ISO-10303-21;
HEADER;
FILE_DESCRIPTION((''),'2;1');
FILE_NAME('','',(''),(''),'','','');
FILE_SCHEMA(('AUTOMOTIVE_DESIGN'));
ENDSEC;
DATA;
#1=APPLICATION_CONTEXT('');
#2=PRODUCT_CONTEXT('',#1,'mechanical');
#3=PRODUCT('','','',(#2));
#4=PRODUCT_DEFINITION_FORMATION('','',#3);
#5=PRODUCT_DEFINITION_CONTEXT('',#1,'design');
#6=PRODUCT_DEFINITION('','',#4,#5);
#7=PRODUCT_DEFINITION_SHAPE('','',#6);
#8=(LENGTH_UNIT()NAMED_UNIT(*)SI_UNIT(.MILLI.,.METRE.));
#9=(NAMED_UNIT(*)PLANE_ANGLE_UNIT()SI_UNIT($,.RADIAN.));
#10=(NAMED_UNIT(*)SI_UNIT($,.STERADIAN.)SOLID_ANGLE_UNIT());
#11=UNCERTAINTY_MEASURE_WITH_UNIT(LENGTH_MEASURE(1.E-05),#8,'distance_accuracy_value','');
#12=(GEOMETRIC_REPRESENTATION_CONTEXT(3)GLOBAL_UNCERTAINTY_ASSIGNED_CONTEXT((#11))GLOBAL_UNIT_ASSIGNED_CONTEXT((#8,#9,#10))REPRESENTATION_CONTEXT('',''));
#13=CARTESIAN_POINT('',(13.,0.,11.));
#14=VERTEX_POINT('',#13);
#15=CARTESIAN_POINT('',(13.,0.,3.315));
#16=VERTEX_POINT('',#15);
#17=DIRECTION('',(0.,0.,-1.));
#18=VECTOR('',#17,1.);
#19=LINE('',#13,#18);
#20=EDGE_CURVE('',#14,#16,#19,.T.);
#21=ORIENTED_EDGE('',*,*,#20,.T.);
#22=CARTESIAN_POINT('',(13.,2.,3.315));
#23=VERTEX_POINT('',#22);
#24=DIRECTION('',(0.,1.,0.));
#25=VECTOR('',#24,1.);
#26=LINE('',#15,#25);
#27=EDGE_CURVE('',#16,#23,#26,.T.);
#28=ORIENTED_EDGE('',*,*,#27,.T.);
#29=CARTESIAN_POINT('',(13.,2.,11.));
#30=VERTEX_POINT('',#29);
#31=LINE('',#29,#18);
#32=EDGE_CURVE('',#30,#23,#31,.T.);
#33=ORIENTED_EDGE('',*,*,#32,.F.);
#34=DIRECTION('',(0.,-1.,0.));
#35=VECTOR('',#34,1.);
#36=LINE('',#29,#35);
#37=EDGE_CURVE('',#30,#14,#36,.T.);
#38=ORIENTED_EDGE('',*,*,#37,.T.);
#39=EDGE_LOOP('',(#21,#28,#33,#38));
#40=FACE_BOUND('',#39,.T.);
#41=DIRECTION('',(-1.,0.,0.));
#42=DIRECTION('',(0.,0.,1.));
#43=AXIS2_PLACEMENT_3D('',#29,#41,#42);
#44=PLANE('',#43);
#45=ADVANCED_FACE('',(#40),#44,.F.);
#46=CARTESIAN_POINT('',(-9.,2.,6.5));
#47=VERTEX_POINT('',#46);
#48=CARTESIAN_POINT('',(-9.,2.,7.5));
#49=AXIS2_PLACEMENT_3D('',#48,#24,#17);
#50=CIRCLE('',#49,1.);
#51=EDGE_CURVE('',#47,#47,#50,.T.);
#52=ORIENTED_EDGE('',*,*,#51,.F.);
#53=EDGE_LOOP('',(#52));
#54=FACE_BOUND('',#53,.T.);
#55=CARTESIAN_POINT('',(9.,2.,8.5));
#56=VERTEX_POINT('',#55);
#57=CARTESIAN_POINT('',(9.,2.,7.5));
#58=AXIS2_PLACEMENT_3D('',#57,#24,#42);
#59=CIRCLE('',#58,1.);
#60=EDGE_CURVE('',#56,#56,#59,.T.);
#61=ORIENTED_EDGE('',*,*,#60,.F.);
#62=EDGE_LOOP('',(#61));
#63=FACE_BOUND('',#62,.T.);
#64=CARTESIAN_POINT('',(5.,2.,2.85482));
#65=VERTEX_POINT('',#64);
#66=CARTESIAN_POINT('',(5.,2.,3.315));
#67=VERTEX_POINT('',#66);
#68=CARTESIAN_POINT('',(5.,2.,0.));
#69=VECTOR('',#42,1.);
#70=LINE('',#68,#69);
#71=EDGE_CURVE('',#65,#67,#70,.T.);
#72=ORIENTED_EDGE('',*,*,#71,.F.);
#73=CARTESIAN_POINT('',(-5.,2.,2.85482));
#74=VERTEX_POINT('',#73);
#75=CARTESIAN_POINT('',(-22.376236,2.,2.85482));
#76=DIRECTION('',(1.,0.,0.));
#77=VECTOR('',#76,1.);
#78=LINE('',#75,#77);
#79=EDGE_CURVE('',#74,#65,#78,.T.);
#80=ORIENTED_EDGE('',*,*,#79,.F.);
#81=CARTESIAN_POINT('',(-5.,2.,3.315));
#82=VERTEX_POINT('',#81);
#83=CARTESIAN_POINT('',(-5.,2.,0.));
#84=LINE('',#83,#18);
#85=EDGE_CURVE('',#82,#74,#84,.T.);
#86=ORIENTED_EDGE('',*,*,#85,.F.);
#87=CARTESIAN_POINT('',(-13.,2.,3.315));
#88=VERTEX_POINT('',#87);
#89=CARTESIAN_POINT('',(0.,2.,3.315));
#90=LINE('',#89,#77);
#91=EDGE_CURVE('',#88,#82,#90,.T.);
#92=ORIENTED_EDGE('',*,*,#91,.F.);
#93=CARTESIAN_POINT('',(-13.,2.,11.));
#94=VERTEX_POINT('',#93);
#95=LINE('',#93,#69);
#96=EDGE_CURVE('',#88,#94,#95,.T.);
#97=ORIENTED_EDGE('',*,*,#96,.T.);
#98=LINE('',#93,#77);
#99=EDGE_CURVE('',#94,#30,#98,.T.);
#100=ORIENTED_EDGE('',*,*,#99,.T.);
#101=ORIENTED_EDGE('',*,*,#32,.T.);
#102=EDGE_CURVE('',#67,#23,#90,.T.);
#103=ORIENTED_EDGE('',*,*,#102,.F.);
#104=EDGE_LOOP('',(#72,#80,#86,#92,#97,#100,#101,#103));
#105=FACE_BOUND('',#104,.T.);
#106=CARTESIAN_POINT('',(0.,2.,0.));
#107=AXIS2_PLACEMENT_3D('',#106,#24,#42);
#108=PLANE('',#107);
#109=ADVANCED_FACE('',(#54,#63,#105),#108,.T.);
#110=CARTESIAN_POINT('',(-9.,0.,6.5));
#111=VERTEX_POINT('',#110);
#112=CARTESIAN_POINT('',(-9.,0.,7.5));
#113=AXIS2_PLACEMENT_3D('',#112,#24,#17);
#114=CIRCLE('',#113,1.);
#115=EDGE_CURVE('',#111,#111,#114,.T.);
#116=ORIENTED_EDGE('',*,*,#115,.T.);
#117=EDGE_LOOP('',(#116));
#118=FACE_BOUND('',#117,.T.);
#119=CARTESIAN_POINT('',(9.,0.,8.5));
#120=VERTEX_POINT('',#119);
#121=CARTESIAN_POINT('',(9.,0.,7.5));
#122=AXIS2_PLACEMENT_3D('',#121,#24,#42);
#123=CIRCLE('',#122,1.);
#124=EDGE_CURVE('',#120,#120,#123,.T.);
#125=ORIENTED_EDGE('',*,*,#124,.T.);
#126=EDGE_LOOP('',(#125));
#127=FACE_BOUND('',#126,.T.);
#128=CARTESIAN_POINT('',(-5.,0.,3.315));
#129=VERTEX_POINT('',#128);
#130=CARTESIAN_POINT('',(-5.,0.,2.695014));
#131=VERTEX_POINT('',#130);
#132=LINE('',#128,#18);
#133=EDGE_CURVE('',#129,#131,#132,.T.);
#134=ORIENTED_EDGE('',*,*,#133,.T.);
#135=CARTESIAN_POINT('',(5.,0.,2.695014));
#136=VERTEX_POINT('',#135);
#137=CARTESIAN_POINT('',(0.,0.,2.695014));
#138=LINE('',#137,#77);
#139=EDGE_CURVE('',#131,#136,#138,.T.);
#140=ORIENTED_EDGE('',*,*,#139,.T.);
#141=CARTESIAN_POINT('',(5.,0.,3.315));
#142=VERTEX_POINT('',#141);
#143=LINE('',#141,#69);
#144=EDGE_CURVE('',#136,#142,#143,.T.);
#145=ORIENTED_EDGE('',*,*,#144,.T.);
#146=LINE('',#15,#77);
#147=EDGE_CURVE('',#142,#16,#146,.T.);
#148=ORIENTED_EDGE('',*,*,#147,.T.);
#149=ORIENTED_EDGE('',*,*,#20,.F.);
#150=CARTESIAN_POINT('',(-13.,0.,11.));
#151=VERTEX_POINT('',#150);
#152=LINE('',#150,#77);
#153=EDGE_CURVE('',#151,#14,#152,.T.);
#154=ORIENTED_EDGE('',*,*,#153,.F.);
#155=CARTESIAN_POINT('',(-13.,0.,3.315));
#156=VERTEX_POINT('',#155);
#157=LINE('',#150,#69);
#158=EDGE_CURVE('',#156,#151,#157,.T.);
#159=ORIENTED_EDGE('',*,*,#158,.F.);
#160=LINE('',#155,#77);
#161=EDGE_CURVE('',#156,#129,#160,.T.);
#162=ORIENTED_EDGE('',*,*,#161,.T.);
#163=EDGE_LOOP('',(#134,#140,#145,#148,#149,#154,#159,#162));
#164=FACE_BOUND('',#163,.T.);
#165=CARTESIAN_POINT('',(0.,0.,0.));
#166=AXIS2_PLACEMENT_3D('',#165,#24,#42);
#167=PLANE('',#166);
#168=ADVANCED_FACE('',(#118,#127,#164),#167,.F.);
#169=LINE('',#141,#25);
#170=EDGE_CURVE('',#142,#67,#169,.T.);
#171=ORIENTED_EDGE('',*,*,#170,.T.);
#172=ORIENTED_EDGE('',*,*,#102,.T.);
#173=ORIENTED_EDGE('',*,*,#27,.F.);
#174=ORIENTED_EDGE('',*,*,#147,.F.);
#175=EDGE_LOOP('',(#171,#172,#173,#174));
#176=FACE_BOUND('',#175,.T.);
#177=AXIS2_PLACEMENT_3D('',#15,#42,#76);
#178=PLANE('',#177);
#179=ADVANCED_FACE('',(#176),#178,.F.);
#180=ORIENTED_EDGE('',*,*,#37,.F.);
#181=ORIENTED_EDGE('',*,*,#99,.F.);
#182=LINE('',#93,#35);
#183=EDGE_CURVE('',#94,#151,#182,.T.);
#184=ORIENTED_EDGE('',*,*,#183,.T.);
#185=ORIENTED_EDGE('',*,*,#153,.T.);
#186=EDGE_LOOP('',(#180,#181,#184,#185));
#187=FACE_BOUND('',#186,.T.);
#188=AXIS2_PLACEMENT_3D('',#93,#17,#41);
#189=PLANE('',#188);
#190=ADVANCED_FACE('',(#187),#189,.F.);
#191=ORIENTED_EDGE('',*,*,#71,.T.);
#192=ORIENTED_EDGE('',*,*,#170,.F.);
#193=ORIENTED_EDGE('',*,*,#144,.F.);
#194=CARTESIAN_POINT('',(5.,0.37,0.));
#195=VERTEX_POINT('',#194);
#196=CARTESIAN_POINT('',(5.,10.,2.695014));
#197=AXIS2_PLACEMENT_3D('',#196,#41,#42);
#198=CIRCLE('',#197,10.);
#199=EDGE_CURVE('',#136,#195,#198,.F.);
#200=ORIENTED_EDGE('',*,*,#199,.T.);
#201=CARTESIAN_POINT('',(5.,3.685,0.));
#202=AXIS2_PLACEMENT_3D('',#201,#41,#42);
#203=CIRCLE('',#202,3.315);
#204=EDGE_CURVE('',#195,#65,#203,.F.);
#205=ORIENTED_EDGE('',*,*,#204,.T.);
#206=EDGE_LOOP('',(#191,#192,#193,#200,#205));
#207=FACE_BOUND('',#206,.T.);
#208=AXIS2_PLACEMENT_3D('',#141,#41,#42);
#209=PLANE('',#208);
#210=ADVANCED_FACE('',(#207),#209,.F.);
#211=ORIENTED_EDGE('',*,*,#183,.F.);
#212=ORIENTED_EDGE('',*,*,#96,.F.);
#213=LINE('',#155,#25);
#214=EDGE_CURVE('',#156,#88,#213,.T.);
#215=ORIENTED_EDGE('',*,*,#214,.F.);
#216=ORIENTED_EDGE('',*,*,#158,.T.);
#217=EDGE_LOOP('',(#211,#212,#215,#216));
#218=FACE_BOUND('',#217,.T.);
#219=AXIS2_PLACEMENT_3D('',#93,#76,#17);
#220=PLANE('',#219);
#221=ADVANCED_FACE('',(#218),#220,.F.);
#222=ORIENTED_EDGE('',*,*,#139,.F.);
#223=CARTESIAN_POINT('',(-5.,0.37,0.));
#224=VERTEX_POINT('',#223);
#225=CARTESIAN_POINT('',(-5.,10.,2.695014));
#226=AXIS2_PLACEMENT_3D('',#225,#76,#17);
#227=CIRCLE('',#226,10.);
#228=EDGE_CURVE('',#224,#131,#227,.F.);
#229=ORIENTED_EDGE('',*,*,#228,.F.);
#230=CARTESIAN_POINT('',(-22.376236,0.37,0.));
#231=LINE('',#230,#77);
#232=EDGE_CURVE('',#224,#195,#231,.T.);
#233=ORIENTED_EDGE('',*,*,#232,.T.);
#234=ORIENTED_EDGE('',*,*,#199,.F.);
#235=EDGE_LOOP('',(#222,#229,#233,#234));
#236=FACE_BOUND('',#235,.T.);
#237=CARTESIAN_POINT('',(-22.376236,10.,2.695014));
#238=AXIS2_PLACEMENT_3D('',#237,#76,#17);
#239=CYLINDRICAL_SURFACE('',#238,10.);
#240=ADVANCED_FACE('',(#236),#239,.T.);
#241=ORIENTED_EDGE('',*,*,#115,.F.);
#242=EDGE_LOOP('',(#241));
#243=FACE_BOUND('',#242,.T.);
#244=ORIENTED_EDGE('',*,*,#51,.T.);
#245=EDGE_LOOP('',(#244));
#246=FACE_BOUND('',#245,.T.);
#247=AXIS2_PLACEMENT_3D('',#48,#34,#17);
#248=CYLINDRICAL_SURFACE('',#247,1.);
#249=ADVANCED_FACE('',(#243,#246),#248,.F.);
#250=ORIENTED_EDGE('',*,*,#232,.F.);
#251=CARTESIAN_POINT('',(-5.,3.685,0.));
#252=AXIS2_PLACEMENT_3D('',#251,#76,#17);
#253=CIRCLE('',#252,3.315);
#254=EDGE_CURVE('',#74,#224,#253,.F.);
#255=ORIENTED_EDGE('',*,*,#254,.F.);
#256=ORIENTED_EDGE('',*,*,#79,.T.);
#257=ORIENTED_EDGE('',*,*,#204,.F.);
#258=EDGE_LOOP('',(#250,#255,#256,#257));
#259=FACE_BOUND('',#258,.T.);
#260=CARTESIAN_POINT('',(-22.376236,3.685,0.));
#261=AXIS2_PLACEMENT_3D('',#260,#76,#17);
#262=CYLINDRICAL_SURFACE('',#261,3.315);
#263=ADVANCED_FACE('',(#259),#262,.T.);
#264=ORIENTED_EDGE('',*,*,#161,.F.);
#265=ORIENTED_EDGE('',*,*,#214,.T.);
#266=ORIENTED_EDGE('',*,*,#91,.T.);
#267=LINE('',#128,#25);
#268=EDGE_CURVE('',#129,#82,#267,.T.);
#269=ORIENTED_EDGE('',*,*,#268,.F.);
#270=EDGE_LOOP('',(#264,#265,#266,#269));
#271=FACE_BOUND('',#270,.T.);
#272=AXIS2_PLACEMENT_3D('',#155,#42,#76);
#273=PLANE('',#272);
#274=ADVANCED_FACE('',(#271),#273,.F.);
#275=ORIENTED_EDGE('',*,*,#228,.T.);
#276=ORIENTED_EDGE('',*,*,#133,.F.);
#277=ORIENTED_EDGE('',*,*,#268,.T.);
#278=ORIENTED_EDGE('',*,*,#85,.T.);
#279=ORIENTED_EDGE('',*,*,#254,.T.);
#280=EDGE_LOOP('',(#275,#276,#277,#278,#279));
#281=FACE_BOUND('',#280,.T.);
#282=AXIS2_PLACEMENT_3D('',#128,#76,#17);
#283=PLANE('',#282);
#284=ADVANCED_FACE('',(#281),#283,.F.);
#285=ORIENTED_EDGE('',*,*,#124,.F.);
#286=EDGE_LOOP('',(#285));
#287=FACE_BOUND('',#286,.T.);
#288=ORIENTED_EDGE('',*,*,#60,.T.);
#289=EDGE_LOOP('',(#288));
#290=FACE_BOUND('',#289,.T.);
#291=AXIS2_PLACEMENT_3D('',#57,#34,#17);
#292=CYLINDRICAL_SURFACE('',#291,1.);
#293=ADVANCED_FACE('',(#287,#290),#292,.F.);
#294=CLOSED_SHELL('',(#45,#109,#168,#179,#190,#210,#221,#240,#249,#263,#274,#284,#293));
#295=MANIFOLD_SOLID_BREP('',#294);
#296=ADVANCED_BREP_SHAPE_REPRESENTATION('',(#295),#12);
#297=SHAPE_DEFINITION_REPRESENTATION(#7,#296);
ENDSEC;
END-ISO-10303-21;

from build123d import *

# Parameters (mm, degrees)
SKETCH_1_W               = 26
SKETCH_1_H               = 11
SKETCH_1_R               = 1
EXTRUDE_1_DEPTH          = 2
SKETCH_2_R               = 3.315
EXTRUDE_2_DEPTH          = 26
FILLET_1_R               = 10
CUT_EXTRUDE_1_DEPTH      = 18.748239349
CUT_EXTRUDE_1_DEPTH_BACK = 18.748239349
SKETCH_3_W               = 8
SKETCH_3_H               = 6.63


with BuildPart() as part:
    # 草图1 → 凸台-拉伸1 (new body)
    with BuildSketch(Plane(origin=(0, 0, 0), x_dir=(1, 0, 0), z_dir=(0, 1, 0))):
        with Locations((0, -5.5)):
            Rectangle(SKETCH_1_W, SKETCH_1_H)
        with Locations(Location((9, -7.5, 0), (0, 0, 270))):
            Circle(SKETCH_1_R, mode=Mode.SUBTRACT)
        with Locations(Location((-9, -7.5, 0), (0, 0, 90))):
            Circle(SKETCH_1_R, mode=Mode.SUBTRACT)
    extrude(amount=EXTRUDE_1_DEPTH)

    # 草图2 → 凸台-拉伸2 (add)
    with BuildSketch(Plane(origin=(13, 0, 0), x_dir=(0, 0, -1), z_dir=(1, 0, 0))):
        with Locations((0, 3.685)):
            Circle(SKETCH_2_R)
    extrude(amount=-EXTRUDE_2_DEPTH)

    # 圆角1
    # the kernel refuses this fillet: 10 mm, written as the material it takes off along each edge
    with BuildSketch(Plane(origin=(19.737534787, 0, 0), x_dir=(0, 1, 0), z_dir=(-1, 0, 0))) as fillet_1_piece_1:
        with BuildLine():
            CenterArc((10, -2.695013915), FILLET_1_R, 164.365401099, 15.634598901)
            Line((0, -2.695013915), (-0.2, -2.695013915))
            Line((-0.2, -2.695013915), (-0.2, 0))
            Line((-0.2, 0), (0, 0.2))
            ThreePointArc((0, 0.2), (0.185, 0.2), (0.1774, 0.053900278))
            Line((0.1774, 0.053900278), (0.37, 0))
        make_face()
    extrude(amount=39.475069573, mode=Mode.SUBTRACT)

    # 草图3 → 切除-拉伸1 (cut, two sides: drawn at the far end of the back side and taken through both)
    with BuildSketch(Plane(origin=(0, 2, 0), x_dir=(1, 0, 0), z_dir=(0, 1, 0)).offset(-CUT_EXTRUDE_1_DEPTH_BACK)):
        with Locations((9, 0)):
            Rectangle(SKETCH_3_W, SKETCH_3_H)
        with Locations((-9, 0)):
            Rectangle(SKETCH_3_W, SKETCH_3_H)
    extrude(amount=CUT_EXTRUDE_1_DEPTH + CUT_EXTRUDE_1_DEPTH_BACK, mode=Mode.SUBTRACT)


solid = part.part
